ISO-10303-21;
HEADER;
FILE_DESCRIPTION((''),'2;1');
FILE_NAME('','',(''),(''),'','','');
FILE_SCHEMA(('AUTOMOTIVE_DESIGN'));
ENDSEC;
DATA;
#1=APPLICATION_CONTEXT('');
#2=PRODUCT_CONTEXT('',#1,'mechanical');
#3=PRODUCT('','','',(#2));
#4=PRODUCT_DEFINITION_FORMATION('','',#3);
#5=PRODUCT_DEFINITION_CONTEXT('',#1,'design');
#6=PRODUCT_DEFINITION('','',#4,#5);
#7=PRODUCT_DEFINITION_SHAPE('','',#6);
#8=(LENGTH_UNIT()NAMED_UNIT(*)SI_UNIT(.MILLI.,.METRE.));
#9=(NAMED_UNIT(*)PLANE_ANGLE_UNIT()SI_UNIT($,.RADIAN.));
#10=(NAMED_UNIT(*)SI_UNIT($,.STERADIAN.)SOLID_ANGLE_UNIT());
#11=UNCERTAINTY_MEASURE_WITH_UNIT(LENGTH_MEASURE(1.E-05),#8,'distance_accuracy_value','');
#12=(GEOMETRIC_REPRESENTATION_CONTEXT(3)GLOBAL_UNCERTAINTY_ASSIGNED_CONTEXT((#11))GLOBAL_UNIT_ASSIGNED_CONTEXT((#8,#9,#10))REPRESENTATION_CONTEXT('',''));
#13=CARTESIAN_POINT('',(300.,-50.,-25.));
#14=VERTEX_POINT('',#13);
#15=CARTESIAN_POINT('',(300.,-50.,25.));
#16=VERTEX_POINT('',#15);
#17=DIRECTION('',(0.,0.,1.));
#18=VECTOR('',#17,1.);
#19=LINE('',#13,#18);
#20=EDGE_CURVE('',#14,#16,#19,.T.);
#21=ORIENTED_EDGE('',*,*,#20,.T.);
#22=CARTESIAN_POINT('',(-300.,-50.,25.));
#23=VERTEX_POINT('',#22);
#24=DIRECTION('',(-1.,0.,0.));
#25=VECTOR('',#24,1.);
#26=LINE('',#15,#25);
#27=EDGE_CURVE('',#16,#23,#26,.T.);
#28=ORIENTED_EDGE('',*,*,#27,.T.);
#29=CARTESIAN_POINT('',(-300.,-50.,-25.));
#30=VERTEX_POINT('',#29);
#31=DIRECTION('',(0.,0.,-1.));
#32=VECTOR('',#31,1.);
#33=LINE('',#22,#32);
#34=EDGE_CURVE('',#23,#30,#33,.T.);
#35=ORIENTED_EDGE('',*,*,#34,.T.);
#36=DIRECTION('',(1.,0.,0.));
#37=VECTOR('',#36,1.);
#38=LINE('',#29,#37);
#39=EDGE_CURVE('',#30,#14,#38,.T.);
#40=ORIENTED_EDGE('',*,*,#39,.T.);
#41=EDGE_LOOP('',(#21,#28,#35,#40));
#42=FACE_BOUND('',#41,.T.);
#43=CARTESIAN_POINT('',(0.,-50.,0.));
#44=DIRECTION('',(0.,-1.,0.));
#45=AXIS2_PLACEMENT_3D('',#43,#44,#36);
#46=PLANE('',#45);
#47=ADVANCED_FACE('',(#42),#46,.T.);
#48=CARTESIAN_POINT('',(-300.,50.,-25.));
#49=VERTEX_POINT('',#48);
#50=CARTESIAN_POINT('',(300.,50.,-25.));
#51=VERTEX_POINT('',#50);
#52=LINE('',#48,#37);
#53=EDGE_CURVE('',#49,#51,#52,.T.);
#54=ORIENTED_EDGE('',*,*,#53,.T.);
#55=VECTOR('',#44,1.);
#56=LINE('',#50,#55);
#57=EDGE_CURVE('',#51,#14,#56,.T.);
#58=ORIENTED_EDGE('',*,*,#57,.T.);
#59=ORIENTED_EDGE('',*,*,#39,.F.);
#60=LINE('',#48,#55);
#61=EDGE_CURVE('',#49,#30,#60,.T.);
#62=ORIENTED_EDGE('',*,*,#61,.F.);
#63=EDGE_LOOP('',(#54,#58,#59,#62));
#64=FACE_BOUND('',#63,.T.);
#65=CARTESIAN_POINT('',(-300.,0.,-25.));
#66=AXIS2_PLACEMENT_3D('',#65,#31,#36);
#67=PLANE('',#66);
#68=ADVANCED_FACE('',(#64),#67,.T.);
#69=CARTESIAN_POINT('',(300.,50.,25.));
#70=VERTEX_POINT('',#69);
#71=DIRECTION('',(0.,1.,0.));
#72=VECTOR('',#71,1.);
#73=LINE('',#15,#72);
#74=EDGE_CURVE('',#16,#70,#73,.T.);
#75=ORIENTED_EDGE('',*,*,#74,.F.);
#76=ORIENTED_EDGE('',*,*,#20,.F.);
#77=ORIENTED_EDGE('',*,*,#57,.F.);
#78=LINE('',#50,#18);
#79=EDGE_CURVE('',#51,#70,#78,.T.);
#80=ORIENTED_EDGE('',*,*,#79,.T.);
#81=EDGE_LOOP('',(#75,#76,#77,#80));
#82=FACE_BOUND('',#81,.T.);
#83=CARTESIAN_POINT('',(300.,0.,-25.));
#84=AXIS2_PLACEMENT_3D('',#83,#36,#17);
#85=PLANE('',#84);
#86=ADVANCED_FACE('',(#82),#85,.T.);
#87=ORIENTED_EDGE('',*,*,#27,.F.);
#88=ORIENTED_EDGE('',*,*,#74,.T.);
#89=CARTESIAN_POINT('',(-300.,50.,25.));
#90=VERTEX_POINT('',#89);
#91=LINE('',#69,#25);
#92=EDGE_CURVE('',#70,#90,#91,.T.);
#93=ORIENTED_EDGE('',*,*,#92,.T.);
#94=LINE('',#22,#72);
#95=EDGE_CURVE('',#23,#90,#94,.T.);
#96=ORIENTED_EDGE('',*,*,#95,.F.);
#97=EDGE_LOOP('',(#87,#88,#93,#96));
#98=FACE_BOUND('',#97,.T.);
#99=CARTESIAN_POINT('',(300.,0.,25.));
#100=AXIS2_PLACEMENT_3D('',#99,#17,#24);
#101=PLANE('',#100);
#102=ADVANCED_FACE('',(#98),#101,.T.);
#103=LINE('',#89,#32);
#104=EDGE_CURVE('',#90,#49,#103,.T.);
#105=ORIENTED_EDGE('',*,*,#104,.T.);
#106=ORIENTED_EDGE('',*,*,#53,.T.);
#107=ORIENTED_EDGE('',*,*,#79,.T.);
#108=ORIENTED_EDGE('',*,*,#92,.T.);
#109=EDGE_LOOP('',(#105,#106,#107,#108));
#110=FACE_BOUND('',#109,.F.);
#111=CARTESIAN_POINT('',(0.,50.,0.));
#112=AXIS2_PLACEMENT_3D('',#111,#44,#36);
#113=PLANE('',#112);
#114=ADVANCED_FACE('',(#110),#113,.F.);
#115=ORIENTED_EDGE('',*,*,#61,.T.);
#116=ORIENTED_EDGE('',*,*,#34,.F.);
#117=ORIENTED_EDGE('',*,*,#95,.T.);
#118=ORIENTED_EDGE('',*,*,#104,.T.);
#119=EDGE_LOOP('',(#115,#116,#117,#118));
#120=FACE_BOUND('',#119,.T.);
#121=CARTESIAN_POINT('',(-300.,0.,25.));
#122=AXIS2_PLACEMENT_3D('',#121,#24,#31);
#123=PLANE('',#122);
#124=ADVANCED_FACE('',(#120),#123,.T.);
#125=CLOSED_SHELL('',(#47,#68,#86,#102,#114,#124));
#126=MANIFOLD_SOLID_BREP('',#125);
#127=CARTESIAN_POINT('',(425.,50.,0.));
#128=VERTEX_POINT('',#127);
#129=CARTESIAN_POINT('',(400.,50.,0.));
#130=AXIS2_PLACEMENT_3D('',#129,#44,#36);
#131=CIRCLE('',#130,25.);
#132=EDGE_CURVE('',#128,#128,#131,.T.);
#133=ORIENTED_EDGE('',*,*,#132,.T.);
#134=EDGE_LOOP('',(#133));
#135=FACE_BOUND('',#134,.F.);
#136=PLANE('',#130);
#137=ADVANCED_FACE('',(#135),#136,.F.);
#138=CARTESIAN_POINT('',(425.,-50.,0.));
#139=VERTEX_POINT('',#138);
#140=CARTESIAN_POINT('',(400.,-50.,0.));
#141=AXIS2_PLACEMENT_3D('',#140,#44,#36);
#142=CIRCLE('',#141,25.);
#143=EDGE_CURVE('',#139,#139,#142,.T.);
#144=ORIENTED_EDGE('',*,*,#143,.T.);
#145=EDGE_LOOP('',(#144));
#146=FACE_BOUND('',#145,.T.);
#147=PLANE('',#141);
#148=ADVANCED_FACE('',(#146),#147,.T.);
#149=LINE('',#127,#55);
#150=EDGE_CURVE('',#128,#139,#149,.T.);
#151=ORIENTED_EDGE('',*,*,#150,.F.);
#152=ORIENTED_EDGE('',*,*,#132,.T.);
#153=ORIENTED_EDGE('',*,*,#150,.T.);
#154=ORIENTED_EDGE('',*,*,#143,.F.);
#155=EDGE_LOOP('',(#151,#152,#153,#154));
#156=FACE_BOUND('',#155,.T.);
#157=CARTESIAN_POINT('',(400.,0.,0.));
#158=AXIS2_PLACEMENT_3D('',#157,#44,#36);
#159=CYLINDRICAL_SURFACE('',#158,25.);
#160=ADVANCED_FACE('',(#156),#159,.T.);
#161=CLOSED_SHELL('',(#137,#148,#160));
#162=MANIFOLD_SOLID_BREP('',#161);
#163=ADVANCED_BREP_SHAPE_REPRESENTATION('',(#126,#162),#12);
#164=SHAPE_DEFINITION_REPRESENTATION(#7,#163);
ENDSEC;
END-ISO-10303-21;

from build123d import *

# Parameters (mm, degrees)
F1_DEPTH = 50
F0_R     = 25


# Not quite as in the source:
# - a feature of the source that left no trace in its solid (it failed there, or was rolled back) is left out


with BuildPart() as f1:
    # F0 (on Front) → F1 (new body, symmetric)
    with BuildSketch(Plane.XZ):
        Polygon((-225, 25), (-300, 25), (-300, -25), (300, -25), (300, 25), (-195, 25), align=None)
    extrude(amount=F1_DEPTH, both=True)


with BuildPart() as f1b:
    # F0 (on Front) → F1, piece 2 (new body, symmetric)
    with BuildSketch(Plane.XZ):
        with Locations((400, 0)):
            Circle(F0_R)
    extrude(amount=F1_DEPTH, both=True)


solid = Compound([f1.part, f1b.part])
